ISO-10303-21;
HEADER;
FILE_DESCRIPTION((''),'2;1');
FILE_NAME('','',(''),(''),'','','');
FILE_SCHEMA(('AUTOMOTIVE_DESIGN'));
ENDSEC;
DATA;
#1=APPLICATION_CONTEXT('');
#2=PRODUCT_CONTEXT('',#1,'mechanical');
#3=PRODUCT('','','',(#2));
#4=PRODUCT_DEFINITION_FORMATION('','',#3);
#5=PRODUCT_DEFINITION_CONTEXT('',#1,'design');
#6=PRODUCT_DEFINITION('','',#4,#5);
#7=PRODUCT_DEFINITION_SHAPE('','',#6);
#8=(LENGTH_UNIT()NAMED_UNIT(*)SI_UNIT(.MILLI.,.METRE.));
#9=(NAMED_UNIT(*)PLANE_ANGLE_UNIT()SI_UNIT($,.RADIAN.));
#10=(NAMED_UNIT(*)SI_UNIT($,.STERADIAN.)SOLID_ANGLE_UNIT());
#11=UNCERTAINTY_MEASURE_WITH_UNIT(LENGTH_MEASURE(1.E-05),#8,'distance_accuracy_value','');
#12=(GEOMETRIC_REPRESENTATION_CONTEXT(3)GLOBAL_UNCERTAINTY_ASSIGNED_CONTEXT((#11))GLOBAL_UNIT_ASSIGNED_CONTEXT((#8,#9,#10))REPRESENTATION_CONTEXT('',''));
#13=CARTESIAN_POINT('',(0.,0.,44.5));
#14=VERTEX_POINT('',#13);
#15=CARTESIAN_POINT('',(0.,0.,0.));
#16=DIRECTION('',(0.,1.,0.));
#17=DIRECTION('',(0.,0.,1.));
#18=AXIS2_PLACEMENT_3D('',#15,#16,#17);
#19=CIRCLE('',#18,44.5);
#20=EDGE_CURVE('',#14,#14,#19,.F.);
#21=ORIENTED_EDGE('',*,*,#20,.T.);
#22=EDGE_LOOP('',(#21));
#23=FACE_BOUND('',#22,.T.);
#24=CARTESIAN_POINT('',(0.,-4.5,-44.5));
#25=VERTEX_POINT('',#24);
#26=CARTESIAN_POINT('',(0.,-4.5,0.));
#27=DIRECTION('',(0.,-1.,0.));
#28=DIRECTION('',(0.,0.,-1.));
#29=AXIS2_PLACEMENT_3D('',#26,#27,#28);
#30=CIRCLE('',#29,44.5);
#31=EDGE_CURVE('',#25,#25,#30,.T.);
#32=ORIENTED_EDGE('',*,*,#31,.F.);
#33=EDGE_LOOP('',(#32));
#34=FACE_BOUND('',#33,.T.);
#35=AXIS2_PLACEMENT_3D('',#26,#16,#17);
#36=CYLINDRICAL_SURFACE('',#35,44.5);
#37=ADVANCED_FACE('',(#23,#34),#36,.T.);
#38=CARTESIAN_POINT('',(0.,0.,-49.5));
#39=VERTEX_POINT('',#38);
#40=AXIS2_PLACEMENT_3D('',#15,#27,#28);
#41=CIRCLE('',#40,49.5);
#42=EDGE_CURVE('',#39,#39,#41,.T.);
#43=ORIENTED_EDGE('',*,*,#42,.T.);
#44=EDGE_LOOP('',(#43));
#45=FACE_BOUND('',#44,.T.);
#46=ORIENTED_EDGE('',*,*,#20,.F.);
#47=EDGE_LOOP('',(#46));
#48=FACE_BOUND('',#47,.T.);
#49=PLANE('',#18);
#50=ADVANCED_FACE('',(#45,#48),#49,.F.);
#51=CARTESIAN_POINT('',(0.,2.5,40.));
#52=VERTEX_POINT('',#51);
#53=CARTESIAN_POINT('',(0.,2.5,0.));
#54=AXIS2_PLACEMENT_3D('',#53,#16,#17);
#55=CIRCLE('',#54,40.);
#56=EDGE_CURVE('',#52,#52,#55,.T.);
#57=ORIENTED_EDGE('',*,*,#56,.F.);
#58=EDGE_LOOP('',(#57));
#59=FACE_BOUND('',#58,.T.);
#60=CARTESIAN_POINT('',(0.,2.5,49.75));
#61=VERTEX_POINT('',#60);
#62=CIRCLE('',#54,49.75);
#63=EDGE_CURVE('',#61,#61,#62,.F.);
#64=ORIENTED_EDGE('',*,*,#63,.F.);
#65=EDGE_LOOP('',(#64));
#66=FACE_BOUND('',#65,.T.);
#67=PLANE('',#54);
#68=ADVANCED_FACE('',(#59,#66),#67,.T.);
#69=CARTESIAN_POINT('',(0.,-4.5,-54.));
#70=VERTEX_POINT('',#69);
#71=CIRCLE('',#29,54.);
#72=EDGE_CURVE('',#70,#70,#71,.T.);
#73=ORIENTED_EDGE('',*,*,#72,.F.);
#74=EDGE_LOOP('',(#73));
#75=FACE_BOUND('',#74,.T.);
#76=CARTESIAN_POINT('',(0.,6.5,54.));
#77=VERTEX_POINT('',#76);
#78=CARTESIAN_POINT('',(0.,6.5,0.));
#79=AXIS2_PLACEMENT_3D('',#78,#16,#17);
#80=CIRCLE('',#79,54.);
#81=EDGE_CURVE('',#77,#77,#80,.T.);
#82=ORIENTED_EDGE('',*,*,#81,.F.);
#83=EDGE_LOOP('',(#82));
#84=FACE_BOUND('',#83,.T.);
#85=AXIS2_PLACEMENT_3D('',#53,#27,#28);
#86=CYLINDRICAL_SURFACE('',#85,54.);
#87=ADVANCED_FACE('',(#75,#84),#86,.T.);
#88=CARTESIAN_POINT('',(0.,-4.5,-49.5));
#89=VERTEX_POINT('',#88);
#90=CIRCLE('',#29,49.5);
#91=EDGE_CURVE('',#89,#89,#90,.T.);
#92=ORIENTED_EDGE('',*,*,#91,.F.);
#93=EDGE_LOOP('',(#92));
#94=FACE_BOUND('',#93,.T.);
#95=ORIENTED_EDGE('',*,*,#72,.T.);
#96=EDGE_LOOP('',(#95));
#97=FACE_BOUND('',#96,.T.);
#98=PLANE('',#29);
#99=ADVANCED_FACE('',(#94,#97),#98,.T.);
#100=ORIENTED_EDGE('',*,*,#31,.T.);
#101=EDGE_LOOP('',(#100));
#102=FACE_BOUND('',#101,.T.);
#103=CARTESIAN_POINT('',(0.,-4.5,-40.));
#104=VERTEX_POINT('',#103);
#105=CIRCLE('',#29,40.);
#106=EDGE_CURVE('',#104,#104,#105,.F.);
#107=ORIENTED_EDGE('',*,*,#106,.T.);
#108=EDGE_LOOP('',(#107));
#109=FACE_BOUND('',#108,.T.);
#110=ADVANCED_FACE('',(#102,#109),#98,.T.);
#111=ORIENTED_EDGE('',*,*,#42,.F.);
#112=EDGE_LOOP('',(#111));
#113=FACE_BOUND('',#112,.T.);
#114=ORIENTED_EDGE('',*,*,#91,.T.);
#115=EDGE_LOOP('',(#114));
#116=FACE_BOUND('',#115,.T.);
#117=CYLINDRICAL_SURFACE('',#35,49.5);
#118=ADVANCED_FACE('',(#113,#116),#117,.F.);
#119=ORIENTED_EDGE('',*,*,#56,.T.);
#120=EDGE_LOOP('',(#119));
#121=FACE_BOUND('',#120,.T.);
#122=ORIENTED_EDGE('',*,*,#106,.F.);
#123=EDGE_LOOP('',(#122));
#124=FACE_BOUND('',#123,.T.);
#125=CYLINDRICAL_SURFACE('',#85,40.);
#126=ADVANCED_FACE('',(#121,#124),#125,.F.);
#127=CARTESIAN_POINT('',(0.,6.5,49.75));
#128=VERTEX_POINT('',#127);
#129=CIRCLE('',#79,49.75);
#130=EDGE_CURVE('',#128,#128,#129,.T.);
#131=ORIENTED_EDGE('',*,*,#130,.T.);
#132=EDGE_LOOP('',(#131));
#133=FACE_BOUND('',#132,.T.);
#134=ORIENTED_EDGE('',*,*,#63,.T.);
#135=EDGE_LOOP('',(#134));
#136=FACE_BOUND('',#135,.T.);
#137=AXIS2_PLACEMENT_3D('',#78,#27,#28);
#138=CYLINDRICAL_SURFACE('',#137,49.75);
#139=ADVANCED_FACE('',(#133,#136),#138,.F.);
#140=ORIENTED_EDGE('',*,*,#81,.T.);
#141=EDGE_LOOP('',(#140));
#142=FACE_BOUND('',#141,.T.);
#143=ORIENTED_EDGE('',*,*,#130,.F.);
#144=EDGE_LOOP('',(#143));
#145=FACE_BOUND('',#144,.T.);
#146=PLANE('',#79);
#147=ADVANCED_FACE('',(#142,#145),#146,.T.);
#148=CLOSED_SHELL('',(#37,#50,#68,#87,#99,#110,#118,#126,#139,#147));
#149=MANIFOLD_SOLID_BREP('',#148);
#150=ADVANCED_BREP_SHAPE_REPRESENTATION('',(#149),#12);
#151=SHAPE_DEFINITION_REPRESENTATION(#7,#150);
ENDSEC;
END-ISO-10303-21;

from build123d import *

# Parameters (mm, degrees)
SKETCH1_R           = 54
SKETCH1_R_2         = 40
BOSS_EXTRUDE1_DEPTH = 2.5
SKETCH2_R           = 54
SKETCH2_R_2         = 49.75
BOSS_EXTRUDE2_DEPTH = 4
BOSS_EXTRUDE3_START = 4.5
SKETCH3_R           = 54
SKETCH3_R_2         = 49.5
SKETCH3_R_3         = 44.5
SKETCH3_R_4         = 40
BOSS_EXTRUDE3_DEPTH = 4.5


with BuildPart() as part:
    # Sketch1 → Boss-Extrude1 (new body)
    with BuildSketch(Plane(origin=(0, 0, 0), x_dir=(1, 0, 0), z_dir=(0, 1, 0))):
        Circle(SKETCH1_R)
        Circle(SKETCH1_R_2, mode=Mode.SUBTRACT)
    extrude(amount=BOSS_EXTRUDE1_DEPTH)

    # Sketch2 → Boss-Extrude2 (add)
    with BuildSketch(Plane(origin=(0, 2.5, 0), x_dir=(1, 0, 0), z_dir=(0, 1, 0))):
        Circle(SKETCH2_R)
        Circle(SKETCH2_R_2, mode=Mode.SUBTRACT)
    extrude(amount=BOSS_EXTRUDE2_DEPTH)

    # Sketch3 → Boss-Extrude3 (add)
    # profile 1 of 2: a face of its own
    with BuildSketch(Plane.XZ.offset(BOSS_EXTRUDE3_START)):
        Circle(SKETCH3_R)
        Circle(SKETCH3_R_2, mode=Mode.SUBTRACT)
    # profile 2 of 2: a face of its own
    with BuildSketch(Plane.XZ.offset(BOSS_EXTRUDE3_START)):
        Circle(SKETCH3_R_3)
        Circle(SKETCH3_R_4, mode=Mode.SUBTRACT)
    extrude(amount=-BOSS_EXTRUDE3_DEPTH)


solid = part.part
